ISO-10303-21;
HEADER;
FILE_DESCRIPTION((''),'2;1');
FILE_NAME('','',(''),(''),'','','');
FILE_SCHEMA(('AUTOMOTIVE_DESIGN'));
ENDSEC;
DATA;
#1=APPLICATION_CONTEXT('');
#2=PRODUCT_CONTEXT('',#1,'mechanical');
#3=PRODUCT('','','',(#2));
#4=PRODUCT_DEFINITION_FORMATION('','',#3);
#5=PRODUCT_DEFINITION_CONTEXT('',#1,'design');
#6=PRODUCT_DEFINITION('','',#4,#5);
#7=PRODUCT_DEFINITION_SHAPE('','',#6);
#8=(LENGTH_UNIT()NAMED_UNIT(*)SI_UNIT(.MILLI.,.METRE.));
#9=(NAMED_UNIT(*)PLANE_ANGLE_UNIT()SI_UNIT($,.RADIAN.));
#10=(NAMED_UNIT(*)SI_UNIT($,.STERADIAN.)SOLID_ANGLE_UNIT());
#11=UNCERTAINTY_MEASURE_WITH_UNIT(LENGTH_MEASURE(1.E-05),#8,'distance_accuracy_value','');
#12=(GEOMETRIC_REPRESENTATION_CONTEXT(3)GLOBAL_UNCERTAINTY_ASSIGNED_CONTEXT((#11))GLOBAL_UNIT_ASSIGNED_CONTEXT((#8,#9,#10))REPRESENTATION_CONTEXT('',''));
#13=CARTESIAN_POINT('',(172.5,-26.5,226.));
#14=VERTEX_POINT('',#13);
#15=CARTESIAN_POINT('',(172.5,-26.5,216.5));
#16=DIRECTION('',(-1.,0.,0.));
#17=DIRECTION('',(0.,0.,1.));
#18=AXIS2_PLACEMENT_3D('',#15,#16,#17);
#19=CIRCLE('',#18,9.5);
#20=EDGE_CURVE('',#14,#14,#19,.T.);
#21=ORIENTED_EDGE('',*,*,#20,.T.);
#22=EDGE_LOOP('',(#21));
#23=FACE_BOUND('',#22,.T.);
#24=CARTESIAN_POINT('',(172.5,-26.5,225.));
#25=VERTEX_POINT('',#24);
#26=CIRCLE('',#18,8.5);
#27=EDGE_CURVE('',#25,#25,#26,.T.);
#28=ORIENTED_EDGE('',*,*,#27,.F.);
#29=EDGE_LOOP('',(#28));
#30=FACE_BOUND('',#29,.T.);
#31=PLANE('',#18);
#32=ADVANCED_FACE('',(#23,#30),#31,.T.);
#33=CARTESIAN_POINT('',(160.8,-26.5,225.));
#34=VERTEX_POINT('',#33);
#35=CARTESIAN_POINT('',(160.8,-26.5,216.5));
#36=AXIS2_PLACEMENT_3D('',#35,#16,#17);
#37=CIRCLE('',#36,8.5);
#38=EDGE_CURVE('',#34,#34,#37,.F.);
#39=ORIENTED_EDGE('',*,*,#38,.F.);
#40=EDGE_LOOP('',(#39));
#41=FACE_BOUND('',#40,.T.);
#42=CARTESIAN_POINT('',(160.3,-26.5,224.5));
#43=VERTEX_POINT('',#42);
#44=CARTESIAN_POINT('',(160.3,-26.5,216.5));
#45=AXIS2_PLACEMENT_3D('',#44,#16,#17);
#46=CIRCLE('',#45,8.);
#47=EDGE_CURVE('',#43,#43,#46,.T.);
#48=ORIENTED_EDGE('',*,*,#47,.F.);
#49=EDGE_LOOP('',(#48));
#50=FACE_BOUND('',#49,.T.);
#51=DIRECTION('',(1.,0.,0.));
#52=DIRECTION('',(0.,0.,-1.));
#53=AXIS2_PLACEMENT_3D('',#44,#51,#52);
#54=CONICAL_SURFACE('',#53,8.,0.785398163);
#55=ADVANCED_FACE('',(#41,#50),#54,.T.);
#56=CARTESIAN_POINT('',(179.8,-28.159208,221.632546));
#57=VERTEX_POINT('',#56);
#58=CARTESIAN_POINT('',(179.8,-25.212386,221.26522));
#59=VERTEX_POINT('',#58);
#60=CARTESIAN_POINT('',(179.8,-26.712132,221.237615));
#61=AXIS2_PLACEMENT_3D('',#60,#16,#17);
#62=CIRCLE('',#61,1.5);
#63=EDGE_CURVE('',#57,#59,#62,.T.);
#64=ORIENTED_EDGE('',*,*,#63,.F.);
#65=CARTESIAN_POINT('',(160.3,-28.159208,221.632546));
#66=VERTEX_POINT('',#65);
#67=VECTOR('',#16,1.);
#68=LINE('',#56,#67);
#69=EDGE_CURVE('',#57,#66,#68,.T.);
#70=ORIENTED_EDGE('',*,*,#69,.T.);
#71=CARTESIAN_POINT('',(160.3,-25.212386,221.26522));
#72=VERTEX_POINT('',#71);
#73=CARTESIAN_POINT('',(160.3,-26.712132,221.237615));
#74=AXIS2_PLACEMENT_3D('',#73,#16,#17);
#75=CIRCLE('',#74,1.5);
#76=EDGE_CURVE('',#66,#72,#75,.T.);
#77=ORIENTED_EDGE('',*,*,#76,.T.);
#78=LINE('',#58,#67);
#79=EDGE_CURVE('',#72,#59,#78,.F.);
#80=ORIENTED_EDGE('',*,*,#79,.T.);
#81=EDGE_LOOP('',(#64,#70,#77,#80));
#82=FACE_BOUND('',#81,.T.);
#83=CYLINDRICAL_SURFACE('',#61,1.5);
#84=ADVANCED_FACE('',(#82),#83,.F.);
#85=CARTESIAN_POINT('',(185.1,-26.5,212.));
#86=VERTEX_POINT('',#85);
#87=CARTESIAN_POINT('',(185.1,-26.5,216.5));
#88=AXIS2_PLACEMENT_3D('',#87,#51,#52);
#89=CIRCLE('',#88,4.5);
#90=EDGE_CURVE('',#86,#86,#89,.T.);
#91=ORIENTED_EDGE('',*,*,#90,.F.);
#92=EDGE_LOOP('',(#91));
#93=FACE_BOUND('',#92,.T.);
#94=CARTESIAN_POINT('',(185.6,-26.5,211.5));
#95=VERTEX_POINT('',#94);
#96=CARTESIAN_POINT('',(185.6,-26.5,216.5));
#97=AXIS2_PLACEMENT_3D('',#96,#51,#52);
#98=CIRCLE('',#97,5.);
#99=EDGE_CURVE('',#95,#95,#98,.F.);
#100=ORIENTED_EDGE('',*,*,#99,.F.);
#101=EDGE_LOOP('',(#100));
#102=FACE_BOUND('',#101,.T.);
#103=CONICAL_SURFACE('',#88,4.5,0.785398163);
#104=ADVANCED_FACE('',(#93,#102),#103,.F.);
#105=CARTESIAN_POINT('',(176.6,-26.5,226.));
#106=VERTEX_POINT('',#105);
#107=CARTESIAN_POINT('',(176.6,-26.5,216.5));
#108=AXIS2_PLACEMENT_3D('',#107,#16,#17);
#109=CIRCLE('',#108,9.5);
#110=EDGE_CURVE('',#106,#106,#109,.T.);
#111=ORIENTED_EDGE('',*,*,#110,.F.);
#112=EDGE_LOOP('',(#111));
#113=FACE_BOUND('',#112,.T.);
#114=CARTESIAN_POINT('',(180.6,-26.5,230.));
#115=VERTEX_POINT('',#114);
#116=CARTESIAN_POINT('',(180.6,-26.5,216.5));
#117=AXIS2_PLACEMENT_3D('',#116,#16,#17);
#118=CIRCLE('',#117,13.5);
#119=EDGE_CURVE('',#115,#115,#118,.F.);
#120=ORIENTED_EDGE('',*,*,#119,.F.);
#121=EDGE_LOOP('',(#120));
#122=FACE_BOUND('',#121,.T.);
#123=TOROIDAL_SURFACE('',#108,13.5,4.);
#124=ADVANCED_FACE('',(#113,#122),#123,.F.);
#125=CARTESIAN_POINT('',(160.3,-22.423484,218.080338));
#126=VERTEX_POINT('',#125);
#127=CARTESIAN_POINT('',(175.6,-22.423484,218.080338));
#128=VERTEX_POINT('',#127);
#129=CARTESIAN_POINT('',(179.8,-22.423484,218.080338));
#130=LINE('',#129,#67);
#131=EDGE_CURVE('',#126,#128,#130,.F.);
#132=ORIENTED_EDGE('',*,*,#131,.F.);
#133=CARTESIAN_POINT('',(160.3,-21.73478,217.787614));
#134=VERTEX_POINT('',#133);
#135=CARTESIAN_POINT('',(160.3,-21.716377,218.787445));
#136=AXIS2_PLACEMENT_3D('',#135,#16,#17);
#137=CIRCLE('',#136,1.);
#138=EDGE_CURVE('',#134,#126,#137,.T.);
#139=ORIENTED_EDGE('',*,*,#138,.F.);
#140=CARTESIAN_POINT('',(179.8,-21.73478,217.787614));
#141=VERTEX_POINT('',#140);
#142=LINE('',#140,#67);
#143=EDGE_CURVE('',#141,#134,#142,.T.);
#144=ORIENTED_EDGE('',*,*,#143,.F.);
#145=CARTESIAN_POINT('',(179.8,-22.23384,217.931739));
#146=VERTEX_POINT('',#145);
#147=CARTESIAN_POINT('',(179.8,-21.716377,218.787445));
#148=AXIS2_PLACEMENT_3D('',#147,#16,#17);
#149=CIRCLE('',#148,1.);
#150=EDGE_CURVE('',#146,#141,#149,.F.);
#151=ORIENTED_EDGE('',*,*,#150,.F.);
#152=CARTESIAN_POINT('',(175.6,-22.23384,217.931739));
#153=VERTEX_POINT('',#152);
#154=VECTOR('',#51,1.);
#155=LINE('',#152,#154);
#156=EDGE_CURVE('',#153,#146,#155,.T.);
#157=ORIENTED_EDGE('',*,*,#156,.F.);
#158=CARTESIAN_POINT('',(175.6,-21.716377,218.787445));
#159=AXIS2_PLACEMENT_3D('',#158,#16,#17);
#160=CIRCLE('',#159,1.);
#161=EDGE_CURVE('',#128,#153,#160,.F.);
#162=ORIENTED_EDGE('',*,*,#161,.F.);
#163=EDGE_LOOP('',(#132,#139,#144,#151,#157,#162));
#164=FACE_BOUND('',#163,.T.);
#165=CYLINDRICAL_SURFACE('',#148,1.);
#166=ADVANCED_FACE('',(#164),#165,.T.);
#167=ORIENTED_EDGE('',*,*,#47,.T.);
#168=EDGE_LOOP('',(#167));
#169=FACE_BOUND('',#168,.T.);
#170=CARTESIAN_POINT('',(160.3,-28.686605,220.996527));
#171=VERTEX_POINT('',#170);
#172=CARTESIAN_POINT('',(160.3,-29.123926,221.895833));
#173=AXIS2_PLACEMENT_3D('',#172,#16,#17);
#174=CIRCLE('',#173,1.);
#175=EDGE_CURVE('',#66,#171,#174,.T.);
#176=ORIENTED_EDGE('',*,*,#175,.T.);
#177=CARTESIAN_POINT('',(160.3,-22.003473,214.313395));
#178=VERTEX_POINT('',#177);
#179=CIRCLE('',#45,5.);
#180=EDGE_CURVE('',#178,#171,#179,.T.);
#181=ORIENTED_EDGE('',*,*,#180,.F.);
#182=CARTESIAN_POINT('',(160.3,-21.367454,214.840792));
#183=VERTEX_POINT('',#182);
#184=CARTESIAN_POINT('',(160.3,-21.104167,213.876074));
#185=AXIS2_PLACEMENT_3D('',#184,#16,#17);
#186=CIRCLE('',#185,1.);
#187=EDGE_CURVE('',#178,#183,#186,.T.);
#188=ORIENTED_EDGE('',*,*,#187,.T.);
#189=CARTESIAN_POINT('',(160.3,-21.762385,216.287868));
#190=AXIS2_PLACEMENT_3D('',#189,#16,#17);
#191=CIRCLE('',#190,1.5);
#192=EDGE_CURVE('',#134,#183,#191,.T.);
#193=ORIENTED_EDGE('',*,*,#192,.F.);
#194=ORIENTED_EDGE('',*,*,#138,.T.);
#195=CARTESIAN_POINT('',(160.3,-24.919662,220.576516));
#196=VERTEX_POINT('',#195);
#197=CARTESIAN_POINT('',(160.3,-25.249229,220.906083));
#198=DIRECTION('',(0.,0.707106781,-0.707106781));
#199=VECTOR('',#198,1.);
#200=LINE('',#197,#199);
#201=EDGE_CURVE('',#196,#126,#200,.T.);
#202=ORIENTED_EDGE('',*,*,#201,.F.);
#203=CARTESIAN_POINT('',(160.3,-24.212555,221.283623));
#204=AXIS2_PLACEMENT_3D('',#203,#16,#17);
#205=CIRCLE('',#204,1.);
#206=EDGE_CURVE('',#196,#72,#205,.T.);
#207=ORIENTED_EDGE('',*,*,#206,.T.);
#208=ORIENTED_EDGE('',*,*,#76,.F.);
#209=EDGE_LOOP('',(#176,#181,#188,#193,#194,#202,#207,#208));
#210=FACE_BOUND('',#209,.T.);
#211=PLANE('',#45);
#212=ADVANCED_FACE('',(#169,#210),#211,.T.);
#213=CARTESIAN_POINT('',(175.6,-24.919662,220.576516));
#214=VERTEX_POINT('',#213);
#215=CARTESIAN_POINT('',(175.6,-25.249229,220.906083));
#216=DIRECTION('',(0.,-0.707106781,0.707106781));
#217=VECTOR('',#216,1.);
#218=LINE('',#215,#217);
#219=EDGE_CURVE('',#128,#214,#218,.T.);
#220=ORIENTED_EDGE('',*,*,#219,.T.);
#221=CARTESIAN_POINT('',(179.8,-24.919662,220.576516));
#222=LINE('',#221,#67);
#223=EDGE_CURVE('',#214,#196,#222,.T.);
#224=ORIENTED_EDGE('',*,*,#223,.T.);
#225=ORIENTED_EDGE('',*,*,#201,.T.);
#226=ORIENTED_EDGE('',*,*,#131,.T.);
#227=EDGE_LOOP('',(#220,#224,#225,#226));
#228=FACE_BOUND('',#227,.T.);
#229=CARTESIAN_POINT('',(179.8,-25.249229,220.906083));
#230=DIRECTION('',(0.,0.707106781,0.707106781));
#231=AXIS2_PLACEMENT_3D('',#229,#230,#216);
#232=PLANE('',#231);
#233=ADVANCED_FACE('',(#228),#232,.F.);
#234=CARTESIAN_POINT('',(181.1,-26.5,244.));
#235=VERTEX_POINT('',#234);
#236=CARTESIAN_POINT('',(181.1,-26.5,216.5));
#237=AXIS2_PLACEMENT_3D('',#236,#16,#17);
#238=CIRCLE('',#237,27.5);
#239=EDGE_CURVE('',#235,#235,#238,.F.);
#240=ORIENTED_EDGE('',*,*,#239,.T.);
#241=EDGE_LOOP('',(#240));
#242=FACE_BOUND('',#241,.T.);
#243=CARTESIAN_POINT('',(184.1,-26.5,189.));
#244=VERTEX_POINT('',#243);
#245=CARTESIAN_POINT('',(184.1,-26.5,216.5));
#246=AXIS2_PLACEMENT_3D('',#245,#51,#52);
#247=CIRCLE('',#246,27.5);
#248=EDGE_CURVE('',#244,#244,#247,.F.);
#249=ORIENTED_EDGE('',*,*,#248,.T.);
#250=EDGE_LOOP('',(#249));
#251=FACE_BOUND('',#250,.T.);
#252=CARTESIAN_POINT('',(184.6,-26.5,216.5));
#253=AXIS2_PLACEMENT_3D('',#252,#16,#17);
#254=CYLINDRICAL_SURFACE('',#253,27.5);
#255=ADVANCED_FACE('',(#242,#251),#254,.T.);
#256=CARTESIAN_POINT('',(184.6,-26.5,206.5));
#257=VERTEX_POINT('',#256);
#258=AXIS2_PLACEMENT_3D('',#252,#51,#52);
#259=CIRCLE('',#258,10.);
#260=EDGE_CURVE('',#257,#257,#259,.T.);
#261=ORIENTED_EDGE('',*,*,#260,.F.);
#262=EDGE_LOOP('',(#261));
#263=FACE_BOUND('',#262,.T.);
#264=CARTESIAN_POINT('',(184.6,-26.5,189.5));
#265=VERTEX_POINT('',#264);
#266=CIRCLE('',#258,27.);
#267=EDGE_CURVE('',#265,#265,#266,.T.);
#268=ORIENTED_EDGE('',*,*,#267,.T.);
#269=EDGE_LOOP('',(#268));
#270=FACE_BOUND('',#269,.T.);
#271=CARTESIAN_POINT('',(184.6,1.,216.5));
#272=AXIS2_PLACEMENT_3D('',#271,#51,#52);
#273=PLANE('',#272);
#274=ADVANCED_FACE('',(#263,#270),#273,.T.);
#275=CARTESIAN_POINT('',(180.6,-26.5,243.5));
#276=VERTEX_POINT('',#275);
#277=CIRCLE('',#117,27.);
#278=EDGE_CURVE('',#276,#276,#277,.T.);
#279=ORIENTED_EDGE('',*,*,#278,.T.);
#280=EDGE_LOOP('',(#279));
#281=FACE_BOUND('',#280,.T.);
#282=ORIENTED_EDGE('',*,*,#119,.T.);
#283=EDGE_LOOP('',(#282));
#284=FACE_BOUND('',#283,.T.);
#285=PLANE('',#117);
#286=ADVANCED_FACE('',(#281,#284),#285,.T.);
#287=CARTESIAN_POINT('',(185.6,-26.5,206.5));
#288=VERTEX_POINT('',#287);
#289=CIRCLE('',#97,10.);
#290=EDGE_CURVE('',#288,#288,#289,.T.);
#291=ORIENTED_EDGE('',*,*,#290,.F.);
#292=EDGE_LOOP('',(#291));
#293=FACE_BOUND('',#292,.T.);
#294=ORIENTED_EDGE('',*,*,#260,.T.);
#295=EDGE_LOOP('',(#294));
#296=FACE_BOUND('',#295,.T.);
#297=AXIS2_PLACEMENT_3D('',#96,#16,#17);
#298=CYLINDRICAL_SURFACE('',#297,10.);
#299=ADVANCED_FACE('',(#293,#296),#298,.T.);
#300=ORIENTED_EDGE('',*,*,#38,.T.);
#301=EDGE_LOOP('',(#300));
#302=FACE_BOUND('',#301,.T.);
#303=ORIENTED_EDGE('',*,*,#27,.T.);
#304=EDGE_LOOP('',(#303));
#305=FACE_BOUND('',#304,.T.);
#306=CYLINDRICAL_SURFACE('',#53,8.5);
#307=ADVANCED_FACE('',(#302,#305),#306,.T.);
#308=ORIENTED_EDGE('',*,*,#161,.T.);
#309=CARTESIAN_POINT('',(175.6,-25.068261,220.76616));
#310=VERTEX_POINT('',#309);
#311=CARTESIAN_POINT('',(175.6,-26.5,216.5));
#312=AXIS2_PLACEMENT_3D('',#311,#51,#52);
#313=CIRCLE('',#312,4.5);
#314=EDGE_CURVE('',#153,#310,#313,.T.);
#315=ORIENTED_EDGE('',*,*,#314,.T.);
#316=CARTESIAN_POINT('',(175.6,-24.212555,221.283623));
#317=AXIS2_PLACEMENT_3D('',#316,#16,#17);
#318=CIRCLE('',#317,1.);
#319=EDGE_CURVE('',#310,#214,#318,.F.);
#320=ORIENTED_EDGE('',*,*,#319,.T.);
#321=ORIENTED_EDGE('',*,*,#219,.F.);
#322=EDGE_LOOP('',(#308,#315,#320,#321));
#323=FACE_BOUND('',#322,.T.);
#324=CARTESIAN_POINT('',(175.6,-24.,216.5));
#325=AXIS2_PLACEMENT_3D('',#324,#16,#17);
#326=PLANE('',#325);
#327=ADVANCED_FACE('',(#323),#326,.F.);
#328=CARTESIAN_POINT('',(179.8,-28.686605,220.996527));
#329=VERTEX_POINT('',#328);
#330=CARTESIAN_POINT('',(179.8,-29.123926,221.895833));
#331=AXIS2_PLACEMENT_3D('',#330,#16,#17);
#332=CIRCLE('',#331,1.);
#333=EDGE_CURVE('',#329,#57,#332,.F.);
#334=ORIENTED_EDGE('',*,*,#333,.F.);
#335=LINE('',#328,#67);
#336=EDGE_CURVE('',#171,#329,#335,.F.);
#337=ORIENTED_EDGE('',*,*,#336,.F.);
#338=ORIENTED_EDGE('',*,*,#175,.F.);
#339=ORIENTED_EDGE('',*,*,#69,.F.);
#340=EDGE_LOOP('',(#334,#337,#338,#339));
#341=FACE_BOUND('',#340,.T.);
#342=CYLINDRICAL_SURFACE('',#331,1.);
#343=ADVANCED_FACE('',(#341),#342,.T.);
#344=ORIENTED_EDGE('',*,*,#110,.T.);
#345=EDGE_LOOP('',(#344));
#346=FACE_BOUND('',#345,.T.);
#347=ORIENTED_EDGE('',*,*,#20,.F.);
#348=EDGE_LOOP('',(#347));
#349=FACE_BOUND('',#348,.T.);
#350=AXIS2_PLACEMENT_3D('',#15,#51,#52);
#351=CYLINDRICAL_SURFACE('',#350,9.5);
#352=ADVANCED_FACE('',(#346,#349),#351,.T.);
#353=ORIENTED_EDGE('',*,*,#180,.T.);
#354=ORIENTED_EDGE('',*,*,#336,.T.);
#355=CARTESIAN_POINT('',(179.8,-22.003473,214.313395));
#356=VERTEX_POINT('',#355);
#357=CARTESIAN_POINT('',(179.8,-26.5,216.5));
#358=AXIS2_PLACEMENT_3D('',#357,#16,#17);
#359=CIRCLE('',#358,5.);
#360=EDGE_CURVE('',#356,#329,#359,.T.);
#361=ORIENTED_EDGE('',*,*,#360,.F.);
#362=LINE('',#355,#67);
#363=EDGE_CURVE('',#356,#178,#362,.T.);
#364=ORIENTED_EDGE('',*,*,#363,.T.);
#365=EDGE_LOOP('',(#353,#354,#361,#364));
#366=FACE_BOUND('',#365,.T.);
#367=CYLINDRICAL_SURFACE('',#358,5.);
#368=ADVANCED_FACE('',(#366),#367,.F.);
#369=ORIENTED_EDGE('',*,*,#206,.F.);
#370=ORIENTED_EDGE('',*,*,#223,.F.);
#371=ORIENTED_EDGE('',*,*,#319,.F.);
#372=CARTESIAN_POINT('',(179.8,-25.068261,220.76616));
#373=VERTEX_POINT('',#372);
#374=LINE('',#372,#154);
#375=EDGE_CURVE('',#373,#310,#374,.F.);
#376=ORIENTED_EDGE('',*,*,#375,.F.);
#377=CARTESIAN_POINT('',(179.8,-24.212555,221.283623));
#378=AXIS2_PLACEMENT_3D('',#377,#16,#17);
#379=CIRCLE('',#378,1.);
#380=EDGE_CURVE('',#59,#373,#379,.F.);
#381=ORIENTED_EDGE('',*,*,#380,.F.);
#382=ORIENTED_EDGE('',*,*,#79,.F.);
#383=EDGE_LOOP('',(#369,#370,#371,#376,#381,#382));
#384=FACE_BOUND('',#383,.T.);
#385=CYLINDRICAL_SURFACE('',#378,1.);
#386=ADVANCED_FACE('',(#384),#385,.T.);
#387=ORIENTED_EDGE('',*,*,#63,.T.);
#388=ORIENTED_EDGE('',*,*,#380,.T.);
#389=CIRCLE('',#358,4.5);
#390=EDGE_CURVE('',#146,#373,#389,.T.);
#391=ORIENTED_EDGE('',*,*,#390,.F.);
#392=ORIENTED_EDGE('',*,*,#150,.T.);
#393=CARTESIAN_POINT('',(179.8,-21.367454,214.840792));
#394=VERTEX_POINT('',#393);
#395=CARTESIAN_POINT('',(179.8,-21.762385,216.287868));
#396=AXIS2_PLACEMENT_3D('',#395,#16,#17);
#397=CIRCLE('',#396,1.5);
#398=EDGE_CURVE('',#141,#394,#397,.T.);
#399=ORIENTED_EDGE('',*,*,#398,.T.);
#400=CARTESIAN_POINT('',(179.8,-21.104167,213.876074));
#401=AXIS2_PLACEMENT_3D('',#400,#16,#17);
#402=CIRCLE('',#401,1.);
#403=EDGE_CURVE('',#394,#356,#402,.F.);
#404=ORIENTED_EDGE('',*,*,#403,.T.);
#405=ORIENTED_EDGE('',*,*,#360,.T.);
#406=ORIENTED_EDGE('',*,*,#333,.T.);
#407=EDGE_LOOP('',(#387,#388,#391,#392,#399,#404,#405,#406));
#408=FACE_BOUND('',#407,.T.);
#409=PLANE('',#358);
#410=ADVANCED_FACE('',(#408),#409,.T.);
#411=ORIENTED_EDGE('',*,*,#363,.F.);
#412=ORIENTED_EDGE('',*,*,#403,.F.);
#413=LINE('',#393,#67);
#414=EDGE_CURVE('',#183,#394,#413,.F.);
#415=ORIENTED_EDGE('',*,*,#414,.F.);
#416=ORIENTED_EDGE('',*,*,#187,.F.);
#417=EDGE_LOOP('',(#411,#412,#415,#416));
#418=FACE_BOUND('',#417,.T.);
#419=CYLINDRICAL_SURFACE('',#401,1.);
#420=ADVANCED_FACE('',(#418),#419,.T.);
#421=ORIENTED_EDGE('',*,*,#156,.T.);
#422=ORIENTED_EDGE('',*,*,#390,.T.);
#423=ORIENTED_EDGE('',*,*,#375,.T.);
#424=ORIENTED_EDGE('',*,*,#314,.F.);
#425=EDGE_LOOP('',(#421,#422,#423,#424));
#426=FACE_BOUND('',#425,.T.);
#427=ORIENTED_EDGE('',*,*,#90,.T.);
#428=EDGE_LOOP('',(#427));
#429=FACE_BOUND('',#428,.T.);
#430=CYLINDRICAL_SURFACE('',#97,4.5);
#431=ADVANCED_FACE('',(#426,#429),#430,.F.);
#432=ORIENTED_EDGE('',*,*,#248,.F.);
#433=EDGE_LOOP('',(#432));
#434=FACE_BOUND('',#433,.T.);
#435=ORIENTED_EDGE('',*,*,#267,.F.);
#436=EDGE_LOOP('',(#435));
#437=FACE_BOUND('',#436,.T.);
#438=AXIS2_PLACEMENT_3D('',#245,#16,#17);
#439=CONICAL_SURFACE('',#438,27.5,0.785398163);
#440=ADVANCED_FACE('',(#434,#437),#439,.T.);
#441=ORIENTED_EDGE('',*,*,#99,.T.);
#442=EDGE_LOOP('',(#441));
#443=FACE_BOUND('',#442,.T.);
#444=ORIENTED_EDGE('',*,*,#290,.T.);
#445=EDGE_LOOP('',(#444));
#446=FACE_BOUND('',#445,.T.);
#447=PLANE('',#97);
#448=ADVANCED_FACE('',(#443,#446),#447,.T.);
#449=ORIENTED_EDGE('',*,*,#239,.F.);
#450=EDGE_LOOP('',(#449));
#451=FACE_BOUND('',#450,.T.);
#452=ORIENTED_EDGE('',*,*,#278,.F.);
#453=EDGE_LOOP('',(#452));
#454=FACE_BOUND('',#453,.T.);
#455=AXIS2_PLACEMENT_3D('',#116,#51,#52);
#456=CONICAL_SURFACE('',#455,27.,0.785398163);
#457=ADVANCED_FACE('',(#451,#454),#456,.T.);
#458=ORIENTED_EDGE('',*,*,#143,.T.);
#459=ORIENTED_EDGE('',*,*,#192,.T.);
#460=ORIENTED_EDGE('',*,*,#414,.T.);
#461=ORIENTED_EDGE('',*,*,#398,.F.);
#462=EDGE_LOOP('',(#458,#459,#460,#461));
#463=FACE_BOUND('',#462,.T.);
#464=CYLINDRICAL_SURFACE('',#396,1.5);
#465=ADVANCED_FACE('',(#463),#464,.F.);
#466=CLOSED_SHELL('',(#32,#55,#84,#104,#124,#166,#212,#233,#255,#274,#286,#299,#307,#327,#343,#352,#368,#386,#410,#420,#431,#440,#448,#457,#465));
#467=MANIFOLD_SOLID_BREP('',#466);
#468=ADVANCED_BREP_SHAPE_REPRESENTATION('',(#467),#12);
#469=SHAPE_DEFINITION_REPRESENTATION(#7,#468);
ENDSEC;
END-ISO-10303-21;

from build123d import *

# Parameters (mm, degrees)
SKETCH1_W           = 4
SKETCH1_H           = 27.5
SKETCH2_R           = 10
BOSS_EXTRUDE1_DEPTH = 1
SKETCH3_R           = 9.5
BOSS_EXTRUDE2_DEPTH = 8.1
SKETCH4_R           = 8.5
BOSS_EXTRUDE3_DEPTH = 12.2
CUT_EXTRUDE1_DEPTH  = 19.5
HOLE1_D             = 5
HOLE1_DEPTH         = 25.3
HOLE1_CBORE_D       = 9
HOLE1_CBORE_DEPTH   = 10
CHAMFER1_SIZE       = 0.5
FILLET1_R           = 1
FILLET2_R           = 4


with BuildPart() as part:
    # Sketch1 → Revolve1 (revolve)
    with BuildSketch(Plane(origin=(0, 0, 216.5), x_dir=(-1, 0, 0), z_dir=(0, 0, -1)), mode=Mode.PRIVATE) as revolve1_sk:
        with Locations((-182.6, -12.75)):
            Rectangle(SKETCH1_W, SKETCH1_H)
    revolve(revolve1_sk.sketch.rotate(Axis((184.6, -26.5, 216.5), (-1, 0, 0)), 270), axis=Axis((184.6, -26.5, 216.5), (-1, 0, 0)))

    # Sketch2 → Boss-Extrude1 (add)
    with BuildSketch(Plane(origin=(184.6, 0, 0), x_dir=(0, 0, -1), z_dir=(1, 0, 0))):
        with Locations((-216.5, -26.5)):
            Circle(SKETCH2_R)
    extrude(amount=BOSS_EXTRUDE1_DEPTH)

    # Sketch3 → Boss-Extrude2 (add)
    with BuildSketch(Plane.ZY.offset(-180.6)):
        with Locations((216.5, -26.5)):
            Circle(SKETCH3_R)
    extrude(amount=BOSS_EXTRUDE2_DEPTH)

    # Sketch4 → Boss-Extrude3 (add)
    with BuildSketch(Plane.ZY.offset(-172.5)):
        with Locations((216.5, -26.5)):
            Circle(SKETCH4_R)
    extrude(amount=BOSS_EXTRUDE3_DEPTH)

    # Sketch5 → Cut-Extrude1 (cut)
    with BuildSketch(Plane.ZY.offset(-160.3)):
        with BuildLine():
            Line((220.906082937, -25.249228687), (217.750771313, -22.093917063))
            ThreePointArc((217.750771313, -22.093917063), (216.434925146, -20.269610576), (214.788393439, -21.802085252))
            ThreePointArc((214.788393439, -21.802085252), (212.964466094, -30.035533906), (221.197914748, -28.211606561))
            ThreePointArc((221.197914748, -28.211606561), (222.730389424, -26.565074854), (220.906082937, -25.249228687))
        make_face()
    extrude(amount=-CUT_EXTRUDE1_DEPTH, mode=Mode.SUBTRACT)

    # Hole1
    with Locations(Plane(origin=(185.6, 0, 0), x_dir=(0, 0, -1), z_dir=(1, 0, 0))):
        with Locations((-216.5, -26.5)):
            CounterBoreHole(HOLE1_D / 2, HOLE1_CBORE_D / 2, HOLE1_CBORE_DEPTH, depth=HOLE1_DEPTH)

    # Chamfer1
    chamfer1_edges = [part.edges().sort_by_distance(p)[0] for p in [
        (160.3, -26.5, 208),
        (180.6, -26.5, 189),
        (185.6, -26.5, 221),
        (184.6, -26.5, 189),
    ]]
    chamfer(chamfer1_edges, length=CHAMFER1_SIZE)

    # Fillet1
    # the kernel refuses this fillet: 1 mm, written as the material it takes off along each edge
    with BuildSketch(Plane(origin=(159.134806492, -25.249228687, 220.906082937), x_dir=(0, 0.7071067811864904, -0.7071067811866047), z_dir=(1, 0, 0))) as fillet1_piece_1:
        with BuildLine():
            CenterArc((0.466077403, 1), FILLET1_R, 226.054480438, 43.945519562)
            ThreePointArc((-0.22789666, 0.28), (-0.105493762, 0.146881314), (0, 0))
            Line((0, 0), (0.466077403, 0))
        make_face()
    extrude(amount=20.665193508, mode=Mode.SUBTRACT)
    with BuildSketch(Plane(origin=(159.134806492, -22.093917063, 217.750771313), x_dir=(0, -0.7071067811865017, 0.7071067811865932), z_dir=(1, 0, 0))) as fillet1_piece_2:
        with BuildLine():
            CenterArc((0.466077403, -1), FILLET1_R, 90, 43.945519562)
            ThreePointArc((-0.22789666, -0.28), (-0.105493762, -0.146881314), (0, 0))
            Line((0, 0), (0.466077403, 0))
        make_face()
    extrude(amount=20.665193508, mode=Mode.SUBTRACT)
    with BuildSketch(Plane(origin=(159.010183368, -28.211606561, 221.197914748), x_dir=(0, -0.9206703550954229, -0.39034100123925997), z_dir=(1, 0, 0))) as fillet1_piece_3:
        with BuildLine():
            CenterArc((0.567519318, -0.998668212), FILLET1_R, 92.957354948, 48.80173568)
            ThreePointArc((-0.217895829, -0.37969887), (-0.095021383, -0.197841382), (0, 0))
            ThreePointArc((0, 0), (0.257963326, -0.006658942), (0.515926653, 0))
        make_face()
    extrude(amount=20.789816632, mode=Mode.SUBTRACT)
    with BuildSketch(Plane(origin=(159.010183368, -21.802085252, 214.788393439), x_dir=(0, -0.3903410012394471, -0.9206703550953437), z_dir=(1, 0, 0))) as fillet1_piece_4:
        with BuildLine():
            CenterArc((0.567519318, 0.998668212), FILLET1_R, 218.240909372, 48.80173568)
            ThreePointArc((-0.217895829, 0.37969887), (-0.095021383, 0.197841382), (0, 0))
            ThreePointArc((0, 0), (0.257963326, 0.006658942), (0.515926653, 0))
        make_face()
    extrude(amount=20.789816632, mode=Mode.SUBTRACT)

    # Fillet2
    fillet2_edges = [part.edges().sort_by_distance(p)[0] for p in [
        (180.6, -26.5, 207),
    ]]
    fillet(fillet2_edges, radius=FILLET2_R)


solid = part.part
